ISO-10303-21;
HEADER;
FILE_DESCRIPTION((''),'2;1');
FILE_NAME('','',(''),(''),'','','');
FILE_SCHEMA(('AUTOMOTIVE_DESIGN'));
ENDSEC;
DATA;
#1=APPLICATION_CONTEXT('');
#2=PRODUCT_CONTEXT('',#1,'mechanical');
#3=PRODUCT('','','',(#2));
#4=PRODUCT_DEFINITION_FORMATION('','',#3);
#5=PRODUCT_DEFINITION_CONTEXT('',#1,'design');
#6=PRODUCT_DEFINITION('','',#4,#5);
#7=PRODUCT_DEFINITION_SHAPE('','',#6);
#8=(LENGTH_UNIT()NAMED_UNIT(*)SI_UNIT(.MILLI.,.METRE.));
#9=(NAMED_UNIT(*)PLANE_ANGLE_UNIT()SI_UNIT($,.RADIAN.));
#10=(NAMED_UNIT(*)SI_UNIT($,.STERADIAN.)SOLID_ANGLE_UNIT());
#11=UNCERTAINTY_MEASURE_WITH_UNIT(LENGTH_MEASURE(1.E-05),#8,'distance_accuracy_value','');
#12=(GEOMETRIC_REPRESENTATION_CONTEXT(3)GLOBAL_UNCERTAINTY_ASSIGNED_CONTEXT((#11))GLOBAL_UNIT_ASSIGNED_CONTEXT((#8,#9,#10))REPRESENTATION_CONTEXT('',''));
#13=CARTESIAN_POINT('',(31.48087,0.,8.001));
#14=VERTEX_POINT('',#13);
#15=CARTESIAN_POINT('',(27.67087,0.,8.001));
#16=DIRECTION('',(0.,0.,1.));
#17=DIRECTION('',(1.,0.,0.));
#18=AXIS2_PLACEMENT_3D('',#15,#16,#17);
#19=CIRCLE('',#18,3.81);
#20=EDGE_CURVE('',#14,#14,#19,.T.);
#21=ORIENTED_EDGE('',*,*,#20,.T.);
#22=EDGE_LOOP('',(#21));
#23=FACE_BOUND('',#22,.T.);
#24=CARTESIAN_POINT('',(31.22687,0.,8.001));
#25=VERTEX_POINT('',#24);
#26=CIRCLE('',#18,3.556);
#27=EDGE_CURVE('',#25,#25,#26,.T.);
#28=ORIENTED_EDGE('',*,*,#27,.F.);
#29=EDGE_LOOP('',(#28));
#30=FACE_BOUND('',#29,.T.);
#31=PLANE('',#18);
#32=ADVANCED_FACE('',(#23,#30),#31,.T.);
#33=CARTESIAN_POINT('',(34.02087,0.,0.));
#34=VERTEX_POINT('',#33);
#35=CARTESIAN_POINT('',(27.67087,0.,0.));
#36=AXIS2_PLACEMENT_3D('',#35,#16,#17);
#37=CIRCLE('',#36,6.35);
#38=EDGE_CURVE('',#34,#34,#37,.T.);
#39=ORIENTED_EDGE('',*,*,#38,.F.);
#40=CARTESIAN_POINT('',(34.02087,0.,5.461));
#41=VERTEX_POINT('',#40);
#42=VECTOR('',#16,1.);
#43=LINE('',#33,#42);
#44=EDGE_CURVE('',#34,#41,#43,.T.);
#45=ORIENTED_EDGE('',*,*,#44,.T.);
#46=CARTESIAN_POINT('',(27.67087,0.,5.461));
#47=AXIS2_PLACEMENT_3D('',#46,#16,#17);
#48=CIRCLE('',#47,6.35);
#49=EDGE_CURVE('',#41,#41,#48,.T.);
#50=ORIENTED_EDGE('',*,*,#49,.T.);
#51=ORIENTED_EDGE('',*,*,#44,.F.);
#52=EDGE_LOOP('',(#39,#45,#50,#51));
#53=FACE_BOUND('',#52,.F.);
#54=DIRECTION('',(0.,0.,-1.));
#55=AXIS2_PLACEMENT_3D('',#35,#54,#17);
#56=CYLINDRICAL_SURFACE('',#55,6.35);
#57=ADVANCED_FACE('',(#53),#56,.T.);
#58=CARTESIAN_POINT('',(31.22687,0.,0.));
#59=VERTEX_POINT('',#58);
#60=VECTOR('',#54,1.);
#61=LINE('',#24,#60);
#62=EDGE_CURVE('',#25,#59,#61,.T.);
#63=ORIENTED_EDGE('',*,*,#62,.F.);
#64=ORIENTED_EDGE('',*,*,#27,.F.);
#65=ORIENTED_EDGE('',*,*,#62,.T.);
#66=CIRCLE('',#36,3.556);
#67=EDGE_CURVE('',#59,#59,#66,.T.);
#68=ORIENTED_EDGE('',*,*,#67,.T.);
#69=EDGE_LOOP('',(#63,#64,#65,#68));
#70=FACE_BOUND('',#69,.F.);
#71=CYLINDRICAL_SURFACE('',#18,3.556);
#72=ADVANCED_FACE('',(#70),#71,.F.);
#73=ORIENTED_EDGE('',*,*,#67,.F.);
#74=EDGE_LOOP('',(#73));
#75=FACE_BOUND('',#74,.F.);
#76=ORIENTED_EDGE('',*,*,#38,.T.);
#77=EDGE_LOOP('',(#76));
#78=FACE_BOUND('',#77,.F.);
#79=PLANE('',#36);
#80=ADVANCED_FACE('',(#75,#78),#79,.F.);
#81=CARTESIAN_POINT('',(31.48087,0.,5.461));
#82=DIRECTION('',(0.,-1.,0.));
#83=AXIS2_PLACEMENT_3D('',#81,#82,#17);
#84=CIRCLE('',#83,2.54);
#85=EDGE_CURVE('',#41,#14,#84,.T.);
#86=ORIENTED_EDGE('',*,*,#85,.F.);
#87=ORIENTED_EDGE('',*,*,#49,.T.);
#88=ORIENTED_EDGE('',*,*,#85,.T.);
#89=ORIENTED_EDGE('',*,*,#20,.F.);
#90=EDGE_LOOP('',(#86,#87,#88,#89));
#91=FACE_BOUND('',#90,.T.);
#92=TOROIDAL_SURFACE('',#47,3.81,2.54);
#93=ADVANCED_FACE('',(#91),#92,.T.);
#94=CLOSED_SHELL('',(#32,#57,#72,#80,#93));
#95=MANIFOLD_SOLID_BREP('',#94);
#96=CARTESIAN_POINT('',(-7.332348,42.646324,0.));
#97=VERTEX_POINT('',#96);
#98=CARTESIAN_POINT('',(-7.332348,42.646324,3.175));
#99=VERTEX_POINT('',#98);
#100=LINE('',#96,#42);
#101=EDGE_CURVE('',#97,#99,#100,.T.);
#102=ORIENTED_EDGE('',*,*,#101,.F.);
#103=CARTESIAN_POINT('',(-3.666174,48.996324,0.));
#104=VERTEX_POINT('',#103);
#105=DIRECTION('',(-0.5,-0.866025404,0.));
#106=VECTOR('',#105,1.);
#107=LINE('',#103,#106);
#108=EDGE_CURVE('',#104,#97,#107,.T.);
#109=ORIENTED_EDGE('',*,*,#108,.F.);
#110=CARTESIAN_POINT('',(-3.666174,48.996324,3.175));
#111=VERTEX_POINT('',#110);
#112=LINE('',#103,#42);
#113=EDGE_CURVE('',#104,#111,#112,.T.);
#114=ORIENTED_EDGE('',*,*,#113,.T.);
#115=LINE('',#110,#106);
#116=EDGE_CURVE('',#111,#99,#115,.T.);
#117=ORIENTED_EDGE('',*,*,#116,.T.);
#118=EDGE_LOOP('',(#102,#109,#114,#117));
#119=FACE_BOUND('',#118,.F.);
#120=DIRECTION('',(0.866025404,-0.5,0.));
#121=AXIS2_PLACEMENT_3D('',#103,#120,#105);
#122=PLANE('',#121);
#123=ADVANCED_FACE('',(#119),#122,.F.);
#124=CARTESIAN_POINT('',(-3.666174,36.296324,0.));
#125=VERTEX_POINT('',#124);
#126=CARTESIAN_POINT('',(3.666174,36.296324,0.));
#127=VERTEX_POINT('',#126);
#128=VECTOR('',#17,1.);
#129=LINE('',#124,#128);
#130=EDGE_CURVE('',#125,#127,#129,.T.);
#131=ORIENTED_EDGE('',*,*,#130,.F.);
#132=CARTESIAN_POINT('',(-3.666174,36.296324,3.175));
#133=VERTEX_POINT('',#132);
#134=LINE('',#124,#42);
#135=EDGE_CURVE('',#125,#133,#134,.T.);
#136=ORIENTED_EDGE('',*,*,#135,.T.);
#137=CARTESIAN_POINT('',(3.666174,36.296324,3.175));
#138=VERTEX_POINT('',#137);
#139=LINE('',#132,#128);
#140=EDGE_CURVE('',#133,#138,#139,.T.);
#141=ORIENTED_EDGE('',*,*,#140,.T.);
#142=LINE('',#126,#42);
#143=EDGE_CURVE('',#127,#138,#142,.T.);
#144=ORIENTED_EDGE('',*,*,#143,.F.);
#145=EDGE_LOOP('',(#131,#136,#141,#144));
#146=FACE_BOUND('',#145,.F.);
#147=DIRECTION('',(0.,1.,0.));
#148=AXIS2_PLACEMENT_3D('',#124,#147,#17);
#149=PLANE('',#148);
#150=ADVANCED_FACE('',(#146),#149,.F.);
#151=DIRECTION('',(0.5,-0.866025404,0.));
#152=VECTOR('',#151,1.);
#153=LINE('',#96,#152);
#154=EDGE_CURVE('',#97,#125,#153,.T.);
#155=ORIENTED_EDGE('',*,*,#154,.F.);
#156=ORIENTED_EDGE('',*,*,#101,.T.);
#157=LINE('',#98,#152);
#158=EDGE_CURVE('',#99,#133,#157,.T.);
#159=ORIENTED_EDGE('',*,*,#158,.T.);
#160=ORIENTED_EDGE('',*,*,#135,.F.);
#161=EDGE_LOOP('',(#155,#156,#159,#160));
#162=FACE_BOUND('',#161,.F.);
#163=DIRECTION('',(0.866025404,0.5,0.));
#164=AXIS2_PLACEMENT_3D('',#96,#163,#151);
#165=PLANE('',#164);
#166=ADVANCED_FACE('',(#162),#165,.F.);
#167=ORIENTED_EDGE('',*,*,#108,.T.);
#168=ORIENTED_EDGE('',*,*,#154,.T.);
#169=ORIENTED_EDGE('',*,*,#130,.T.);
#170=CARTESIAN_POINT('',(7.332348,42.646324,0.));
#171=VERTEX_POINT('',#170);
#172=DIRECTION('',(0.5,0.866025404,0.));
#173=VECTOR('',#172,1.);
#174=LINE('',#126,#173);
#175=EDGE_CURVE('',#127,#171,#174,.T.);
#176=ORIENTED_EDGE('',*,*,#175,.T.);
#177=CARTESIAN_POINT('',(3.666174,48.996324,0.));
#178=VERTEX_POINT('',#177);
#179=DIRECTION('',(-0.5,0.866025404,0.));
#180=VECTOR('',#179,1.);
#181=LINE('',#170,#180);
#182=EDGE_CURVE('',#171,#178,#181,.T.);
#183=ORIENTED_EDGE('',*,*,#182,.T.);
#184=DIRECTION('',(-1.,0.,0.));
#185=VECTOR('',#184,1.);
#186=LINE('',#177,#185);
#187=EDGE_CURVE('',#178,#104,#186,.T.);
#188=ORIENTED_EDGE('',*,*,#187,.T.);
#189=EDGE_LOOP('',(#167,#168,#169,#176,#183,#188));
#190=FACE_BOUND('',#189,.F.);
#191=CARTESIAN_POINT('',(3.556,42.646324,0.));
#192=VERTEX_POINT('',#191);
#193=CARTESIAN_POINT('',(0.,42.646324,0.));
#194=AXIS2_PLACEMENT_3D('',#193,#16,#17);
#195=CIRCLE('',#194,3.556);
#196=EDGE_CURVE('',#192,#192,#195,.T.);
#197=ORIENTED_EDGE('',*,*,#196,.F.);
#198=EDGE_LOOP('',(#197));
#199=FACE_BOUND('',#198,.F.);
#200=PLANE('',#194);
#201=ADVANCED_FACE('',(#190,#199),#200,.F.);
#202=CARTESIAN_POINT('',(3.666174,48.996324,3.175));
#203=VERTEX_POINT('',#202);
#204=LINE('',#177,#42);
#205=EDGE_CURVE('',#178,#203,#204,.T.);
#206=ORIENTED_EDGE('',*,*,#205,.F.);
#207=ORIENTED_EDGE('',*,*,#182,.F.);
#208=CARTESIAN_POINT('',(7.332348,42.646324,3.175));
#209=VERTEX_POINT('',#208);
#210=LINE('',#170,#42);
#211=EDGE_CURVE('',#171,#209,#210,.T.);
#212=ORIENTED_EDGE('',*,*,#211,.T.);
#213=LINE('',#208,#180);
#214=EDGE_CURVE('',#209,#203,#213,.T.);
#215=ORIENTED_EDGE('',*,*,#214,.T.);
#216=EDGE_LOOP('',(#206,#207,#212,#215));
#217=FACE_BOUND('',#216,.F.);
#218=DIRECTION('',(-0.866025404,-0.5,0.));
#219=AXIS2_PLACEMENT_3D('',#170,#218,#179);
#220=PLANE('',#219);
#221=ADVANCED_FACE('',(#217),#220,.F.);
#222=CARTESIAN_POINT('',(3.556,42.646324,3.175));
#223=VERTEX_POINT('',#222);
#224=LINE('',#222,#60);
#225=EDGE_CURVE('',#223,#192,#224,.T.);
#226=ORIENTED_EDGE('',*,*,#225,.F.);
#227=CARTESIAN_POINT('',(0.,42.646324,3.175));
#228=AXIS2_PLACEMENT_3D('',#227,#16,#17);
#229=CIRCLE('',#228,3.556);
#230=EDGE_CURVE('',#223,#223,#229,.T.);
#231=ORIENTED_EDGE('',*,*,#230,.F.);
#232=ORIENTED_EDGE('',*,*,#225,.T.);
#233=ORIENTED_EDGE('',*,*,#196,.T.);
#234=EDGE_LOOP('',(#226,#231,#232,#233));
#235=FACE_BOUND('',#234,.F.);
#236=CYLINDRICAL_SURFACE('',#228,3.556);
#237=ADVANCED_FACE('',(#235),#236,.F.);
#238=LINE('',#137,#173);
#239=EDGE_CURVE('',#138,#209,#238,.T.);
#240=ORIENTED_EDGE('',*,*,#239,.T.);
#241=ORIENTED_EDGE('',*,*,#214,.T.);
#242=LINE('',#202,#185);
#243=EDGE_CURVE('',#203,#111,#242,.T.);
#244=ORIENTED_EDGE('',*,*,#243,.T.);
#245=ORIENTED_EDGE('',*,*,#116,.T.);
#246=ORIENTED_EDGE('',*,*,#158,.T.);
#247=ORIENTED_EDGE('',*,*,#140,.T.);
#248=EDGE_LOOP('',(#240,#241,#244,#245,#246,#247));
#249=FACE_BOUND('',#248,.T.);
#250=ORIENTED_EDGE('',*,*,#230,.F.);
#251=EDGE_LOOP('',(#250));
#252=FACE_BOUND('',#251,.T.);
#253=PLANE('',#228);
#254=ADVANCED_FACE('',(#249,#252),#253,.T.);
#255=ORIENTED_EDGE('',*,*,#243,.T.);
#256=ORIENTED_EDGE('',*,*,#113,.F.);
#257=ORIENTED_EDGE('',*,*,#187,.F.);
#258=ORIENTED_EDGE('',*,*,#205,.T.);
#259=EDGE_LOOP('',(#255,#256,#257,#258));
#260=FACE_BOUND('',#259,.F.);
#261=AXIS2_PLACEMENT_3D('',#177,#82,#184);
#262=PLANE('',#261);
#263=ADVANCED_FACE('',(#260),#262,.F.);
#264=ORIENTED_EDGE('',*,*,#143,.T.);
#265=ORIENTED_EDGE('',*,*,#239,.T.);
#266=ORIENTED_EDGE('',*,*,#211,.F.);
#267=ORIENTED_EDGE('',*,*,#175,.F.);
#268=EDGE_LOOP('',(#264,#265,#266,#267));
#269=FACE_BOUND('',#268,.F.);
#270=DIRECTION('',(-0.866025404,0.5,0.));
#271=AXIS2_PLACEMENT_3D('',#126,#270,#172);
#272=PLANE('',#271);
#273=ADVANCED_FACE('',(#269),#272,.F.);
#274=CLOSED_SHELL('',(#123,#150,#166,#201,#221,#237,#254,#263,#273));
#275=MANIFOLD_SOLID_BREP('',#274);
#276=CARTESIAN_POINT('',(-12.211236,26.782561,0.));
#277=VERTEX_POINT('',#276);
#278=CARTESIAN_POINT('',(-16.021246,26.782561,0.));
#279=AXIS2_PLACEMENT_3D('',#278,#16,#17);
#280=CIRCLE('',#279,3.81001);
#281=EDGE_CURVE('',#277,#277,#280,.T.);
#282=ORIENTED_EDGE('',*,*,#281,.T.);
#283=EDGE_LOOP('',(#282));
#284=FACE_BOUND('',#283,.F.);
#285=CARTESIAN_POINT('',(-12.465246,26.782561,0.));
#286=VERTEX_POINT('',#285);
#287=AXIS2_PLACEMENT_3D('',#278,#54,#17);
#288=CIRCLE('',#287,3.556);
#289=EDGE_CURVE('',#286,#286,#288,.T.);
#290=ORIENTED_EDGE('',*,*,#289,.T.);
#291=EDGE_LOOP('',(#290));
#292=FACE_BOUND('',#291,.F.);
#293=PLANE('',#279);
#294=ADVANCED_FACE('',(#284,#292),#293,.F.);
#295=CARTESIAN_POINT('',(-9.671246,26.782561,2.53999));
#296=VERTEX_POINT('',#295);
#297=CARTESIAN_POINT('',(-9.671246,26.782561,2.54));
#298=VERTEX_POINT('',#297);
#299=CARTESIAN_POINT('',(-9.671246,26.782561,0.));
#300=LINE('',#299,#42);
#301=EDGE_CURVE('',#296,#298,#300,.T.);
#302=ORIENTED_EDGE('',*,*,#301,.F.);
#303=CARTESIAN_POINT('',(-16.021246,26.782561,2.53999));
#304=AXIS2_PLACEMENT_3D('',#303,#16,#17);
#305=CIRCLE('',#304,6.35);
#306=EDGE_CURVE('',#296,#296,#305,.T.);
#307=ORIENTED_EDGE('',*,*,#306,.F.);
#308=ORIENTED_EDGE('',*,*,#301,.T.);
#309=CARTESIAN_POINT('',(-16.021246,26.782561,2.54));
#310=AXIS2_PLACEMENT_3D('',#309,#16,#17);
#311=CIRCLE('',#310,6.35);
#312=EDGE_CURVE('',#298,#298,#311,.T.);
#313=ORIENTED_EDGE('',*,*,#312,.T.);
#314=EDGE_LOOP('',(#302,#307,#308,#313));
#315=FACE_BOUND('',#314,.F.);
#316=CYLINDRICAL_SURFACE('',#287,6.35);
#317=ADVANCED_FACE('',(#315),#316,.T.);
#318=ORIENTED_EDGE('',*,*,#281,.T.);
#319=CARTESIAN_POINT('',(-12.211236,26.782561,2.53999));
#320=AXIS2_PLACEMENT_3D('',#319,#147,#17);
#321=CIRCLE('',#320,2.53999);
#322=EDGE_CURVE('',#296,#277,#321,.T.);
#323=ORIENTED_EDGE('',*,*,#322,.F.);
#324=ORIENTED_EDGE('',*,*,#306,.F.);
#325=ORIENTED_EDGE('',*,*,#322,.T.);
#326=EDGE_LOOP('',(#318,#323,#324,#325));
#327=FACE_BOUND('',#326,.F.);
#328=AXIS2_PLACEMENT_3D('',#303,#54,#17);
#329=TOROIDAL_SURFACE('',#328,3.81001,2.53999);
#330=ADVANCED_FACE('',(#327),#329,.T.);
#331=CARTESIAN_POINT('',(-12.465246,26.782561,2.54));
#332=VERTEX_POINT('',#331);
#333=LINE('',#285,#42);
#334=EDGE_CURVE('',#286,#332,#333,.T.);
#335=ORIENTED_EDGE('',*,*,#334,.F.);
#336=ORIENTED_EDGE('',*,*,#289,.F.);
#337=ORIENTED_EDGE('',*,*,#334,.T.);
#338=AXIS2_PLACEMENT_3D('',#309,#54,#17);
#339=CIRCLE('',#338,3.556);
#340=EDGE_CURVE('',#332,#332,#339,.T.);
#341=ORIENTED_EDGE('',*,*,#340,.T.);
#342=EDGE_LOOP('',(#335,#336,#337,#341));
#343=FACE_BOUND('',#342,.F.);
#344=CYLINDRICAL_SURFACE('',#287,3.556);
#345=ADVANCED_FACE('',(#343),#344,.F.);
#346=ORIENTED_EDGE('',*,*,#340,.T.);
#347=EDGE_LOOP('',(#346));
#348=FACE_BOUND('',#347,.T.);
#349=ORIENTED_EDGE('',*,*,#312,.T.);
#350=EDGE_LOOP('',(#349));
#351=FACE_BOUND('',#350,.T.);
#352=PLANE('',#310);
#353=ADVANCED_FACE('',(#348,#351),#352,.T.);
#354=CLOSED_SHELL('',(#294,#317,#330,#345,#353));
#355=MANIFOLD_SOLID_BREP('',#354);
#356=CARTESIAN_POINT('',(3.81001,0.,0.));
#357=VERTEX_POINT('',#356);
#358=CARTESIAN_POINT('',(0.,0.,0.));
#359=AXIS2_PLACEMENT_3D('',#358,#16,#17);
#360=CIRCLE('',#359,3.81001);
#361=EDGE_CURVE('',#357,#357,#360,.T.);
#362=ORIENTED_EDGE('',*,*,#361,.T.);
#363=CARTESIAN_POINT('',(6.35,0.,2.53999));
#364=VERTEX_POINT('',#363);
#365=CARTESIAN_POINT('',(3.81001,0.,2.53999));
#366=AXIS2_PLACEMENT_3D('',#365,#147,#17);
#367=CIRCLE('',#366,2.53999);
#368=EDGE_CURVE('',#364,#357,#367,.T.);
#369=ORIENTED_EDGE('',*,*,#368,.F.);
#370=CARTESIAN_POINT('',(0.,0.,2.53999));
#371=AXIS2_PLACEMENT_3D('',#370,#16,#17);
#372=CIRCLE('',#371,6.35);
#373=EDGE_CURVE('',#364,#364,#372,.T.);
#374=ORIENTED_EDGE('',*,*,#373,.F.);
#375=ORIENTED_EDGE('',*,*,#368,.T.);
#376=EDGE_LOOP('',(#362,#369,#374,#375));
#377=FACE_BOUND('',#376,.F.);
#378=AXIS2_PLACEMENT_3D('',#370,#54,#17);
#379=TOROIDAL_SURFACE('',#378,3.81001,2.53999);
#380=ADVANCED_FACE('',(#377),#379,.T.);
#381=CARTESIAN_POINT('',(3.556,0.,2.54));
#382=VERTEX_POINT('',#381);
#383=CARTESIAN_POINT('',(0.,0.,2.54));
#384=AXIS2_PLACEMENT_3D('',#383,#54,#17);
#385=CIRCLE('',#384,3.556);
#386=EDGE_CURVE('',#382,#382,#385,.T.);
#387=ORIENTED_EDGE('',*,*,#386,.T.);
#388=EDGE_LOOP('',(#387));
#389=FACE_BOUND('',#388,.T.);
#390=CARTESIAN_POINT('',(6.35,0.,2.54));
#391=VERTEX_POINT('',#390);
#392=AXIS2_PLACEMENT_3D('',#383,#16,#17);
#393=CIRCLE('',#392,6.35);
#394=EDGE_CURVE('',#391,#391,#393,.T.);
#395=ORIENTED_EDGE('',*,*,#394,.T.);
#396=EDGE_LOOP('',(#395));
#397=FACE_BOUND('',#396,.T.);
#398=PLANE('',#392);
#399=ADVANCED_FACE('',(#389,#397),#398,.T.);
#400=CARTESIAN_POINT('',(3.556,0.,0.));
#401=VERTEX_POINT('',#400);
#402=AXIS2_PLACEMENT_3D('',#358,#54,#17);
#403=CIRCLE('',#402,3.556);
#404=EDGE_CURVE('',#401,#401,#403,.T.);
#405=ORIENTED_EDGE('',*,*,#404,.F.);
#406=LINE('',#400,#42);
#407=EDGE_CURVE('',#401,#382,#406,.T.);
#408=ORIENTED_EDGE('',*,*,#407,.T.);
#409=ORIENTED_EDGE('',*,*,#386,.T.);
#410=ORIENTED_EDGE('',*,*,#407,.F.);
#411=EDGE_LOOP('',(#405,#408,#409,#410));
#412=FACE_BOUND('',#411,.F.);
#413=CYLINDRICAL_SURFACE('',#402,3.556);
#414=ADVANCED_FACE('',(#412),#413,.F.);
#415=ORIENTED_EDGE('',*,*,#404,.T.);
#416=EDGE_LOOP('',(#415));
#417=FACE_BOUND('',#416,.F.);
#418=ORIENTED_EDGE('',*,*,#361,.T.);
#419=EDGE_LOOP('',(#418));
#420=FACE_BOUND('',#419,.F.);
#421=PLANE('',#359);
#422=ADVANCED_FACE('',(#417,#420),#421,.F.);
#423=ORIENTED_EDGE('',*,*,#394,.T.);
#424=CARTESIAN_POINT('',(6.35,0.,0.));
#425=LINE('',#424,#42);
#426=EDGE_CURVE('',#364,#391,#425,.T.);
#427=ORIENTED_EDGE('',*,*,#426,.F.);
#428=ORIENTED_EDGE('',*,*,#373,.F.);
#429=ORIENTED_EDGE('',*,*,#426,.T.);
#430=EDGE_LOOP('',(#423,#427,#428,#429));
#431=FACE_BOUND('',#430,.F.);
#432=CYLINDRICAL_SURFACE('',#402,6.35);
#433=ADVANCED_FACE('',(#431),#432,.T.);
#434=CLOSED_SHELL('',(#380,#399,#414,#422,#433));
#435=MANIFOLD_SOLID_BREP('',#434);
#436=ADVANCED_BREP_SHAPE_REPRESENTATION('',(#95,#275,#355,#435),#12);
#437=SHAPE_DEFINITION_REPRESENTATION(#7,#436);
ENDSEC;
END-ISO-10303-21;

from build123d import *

# Parameters (mm, degrees)
F0_R      = 6.35
F1_DEPTH  = 2.54
F2_R      = 2.53999
F2_2_R    = 2.53999
F3_R      = 3.556
F4_DEPTH  = 2.54
F5_R      = 3.556
F6_DEPTH  = 2.54
F7_R      = 6.35
F8_DEPTH  = 8.001
F9_R      = 2.54
F11_R     = 3.556
F12_DEPTH = 11.1506
F14_DEPTH = 3.175
F15_R     = 3.556
F16_DEPTH = 3.175


# Not quite as in the source:
# - a fillet or chamfer is up to 0.001 mm smaller than in the source, because OpenCascade refuses the exact size
# - a feature names something its author has since deleted; it is built from what else it names


with BuildPart() as f1:
    # F0 (on Top) → F1 (new body)
    with BuildSketch(Plane.XY):
        Circle(F0_R)
    extrude(amount=F1_DEPTH)

    # F2 (radius 2.54 in the source; OpenCascade refuses exactly that, so slightly less here)
    f2_edges = [f1.edges().sort_by_distance(p)[0] for p in [
        (-6.35, 0, 0),
    ]]
    fillet(f2_edges, radius=F2_R)

    # F3 (on face) → F4 (cut)
    with BuildSketch(Plane(origin=(0, 0, 0), x_dir=(1, 0, 0), z_dir=(0, 0, -1))):
        Circle(F3_R)
    extrude(amount=-F4_DEPTH, mode=Mode.SUBTRACT)


with BuildPart() as f1b:
    # F0 (on Top) → F1, piece 2 (new body)
    with BuildSketch(Plane.XY):
        with Locations((-16.0212460905, 26.7825610936)):
            Circle(F0_R)
    extrude(amount=F1_DEPTH)

    # F2#2 (radius 2.54 in the source; OpenCascade refuses exactly that, so slightly less here)
    f2_2_edges = [f1b.edges().sort_by_distance(p)[0] for p in [
        (-22.371246, 26.782561, 0),
    ]]
    fillet(f2_2_edges, radius=F2_2_R)

    # F5 (on face) → F6 (cut)
    with BuildSketch(Plane(origin=(0, 0, 0), x_dir=(1, 0, 0), z_dir=(0, 0, -1))):
        with Locations((-16.0212460905, -26.7825610936)):
            Circle(F5_R)
    extrude(amount=-F6_DEPTH, mode=Mode.SUBTRACT)


with BuildPart() as f8:
    # F7 (on Top) → F8 (new body)
    with BuildSketch(Plane.XY):
        with Locations((27.6708697799, 0)):
            Circle(F7_R)
    extrude(amount=F8_DEPTH)

    # F9
    f9_edges = [f8.edges().sort_by_distance(p)[0] for p in [
        (21.32087, 0, 8.001),
    ]]
    fillet(f9_edges, radius=F9_R)

    # F11 (on face) → F12 (cut)
    with BuildSketch(Plane.XY.offset(8.001)):
        with Locations((27.6708697799, 0)):
            Circle(F11_R)
    extrude(amount=-F12_DEPTH, mode=Mode.SUBTRACT)


with BuildPart() as f14:
    # F13 (on Top) → F14 (new body)
    with BuildSketch(Plane.XY):
        Polygon((-3.6661742094, 36.2963240518), (3.6661742094, 36.2963240518), (7.3323484187, 42.6463240518), (3.6661742094, 48.9963240518), (-3.6661742094, 48.9963240518), (-7.3323484187, 42.6463240518), align=None)
    extrude(amount=F14_DEPTH)

    # F15 (on face) → F16 (cut)
    with BuildSketch(Plane.XY.offset(3.175)):
        with Locations((0, 42.6463240518)):
            Circle(F15_R)
    extrude(amount=-F16_DEPTH, mode=Mode.SUBTRACT)


solid = Compound([f1.part, f1b.part, f8.part, f14.part])
